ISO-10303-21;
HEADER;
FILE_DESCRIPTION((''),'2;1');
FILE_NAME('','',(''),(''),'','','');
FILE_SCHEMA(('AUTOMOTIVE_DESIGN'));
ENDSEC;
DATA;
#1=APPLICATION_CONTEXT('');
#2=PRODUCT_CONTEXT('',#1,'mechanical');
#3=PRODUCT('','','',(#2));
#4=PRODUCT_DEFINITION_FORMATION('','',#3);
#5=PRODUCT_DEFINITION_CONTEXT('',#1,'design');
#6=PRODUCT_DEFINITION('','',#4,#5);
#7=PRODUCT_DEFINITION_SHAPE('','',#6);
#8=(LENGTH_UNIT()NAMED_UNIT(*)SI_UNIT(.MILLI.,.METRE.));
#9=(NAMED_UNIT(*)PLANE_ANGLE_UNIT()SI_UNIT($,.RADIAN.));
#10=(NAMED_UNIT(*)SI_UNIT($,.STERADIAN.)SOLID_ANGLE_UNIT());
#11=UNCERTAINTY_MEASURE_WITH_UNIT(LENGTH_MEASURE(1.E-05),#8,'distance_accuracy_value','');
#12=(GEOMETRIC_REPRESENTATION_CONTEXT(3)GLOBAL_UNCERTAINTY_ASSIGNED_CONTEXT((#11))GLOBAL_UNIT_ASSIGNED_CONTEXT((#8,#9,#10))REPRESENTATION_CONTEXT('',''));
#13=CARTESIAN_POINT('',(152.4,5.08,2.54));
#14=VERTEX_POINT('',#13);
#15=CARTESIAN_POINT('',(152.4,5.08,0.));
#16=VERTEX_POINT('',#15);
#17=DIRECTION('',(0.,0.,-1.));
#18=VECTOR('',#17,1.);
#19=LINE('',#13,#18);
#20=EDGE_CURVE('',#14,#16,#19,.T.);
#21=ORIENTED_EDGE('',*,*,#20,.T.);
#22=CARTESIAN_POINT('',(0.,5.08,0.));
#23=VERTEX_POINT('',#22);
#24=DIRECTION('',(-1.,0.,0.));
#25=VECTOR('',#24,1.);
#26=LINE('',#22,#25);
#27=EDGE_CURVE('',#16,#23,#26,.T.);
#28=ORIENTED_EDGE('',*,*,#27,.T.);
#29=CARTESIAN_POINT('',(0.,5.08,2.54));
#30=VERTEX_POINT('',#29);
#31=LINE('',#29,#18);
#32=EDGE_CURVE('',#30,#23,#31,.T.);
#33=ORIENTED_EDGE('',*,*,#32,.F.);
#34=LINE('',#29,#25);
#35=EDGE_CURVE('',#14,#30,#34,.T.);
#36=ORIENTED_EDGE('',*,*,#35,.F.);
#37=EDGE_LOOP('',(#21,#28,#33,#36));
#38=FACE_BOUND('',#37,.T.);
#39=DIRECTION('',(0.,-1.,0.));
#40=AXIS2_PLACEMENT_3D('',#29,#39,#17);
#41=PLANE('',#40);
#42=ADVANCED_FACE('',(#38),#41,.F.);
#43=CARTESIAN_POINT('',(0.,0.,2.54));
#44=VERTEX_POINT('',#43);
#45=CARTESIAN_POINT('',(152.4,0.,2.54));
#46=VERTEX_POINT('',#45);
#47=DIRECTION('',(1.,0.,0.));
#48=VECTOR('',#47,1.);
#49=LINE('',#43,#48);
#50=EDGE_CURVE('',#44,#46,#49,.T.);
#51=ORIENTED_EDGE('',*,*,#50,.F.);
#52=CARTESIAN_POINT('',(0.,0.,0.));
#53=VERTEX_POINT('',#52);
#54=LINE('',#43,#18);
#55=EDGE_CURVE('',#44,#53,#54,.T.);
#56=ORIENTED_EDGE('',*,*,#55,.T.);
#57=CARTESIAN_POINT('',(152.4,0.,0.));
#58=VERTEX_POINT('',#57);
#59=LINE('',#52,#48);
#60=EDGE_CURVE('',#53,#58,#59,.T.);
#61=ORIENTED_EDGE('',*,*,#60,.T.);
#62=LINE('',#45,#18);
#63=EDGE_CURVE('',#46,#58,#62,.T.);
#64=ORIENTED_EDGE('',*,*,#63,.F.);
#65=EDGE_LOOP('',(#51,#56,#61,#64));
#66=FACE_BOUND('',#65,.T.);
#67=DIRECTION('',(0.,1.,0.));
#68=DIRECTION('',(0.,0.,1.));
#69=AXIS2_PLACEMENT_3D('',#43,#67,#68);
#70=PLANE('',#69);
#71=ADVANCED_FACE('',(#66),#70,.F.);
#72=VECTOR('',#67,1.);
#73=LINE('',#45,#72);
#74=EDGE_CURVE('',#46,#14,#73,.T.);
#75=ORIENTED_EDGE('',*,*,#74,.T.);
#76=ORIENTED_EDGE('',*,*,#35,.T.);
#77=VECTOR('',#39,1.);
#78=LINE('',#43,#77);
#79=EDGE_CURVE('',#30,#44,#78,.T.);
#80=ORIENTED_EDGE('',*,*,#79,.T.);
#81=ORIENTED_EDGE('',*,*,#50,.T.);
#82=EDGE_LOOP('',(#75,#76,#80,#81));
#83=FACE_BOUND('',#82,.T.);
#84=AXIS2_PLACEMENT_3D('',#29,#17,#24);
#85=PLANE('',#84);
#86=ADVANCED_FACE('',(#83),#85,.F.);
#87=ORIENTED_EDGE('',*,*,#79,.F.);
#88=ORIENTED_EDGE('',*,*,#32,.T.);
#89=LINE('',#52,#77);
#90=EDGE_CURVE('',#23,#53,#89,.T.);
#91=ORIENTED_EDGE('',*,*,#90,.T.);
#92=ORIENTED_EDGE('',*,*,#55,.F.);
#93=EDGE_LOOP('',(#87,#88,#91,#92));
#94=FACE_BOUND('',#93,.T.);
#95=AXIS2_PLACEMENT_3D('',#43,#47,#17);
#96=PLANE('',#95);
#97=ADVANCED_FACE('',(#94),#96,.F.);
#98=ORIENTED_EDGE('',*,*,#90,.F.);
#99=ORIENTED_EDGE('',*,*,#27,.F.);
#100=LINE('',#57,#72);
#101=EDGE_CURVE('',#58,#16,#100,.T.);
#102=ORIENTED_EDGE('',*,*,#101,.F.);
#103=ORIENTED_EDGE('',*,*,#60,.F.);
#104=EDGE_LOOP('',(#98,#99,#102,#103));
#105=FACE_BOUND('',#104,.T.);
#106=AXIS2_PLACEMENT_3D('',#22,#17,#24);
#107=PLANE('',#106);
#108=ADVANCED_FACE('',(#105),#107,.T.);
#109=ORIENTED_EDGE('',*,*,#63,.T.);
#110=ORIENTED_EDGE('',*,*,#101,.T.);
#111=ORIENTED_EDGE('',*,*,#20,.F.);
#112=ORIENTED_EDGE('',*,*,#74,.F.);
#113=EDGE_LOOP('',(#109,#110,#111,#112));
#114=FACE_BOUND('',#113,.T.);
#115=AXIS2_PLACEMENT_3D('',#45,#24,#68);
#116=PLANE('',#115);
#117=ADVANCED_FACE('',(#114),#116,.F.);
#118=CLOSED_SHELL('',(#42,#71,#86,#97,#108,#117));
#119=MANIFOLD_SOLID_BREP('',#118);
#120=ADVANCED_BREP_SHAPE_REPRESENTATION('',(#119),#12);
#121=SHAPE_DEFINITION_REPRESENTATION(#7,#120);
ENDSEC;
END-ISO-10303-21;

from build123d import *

# Parameters (mm, degrees)
SKETCH1_W          = 152.4
SKETCH1_H          = 5.08
BASE_FLANGE1_DEPTH = 2.54


# Sheet-metal steps are written as plain solids
with BuildPart() as part:
    # Sketch1 → Base-Flange1 (new body)
    with BuildSketch(Plane.XY):
        with Locations((76.2, 2.54)):
            Rectangle(SKETCH1_W, SKETCH1_H)
    extrude(amount=BASE_FLANGE1_DEPTH)


solid = part.part
